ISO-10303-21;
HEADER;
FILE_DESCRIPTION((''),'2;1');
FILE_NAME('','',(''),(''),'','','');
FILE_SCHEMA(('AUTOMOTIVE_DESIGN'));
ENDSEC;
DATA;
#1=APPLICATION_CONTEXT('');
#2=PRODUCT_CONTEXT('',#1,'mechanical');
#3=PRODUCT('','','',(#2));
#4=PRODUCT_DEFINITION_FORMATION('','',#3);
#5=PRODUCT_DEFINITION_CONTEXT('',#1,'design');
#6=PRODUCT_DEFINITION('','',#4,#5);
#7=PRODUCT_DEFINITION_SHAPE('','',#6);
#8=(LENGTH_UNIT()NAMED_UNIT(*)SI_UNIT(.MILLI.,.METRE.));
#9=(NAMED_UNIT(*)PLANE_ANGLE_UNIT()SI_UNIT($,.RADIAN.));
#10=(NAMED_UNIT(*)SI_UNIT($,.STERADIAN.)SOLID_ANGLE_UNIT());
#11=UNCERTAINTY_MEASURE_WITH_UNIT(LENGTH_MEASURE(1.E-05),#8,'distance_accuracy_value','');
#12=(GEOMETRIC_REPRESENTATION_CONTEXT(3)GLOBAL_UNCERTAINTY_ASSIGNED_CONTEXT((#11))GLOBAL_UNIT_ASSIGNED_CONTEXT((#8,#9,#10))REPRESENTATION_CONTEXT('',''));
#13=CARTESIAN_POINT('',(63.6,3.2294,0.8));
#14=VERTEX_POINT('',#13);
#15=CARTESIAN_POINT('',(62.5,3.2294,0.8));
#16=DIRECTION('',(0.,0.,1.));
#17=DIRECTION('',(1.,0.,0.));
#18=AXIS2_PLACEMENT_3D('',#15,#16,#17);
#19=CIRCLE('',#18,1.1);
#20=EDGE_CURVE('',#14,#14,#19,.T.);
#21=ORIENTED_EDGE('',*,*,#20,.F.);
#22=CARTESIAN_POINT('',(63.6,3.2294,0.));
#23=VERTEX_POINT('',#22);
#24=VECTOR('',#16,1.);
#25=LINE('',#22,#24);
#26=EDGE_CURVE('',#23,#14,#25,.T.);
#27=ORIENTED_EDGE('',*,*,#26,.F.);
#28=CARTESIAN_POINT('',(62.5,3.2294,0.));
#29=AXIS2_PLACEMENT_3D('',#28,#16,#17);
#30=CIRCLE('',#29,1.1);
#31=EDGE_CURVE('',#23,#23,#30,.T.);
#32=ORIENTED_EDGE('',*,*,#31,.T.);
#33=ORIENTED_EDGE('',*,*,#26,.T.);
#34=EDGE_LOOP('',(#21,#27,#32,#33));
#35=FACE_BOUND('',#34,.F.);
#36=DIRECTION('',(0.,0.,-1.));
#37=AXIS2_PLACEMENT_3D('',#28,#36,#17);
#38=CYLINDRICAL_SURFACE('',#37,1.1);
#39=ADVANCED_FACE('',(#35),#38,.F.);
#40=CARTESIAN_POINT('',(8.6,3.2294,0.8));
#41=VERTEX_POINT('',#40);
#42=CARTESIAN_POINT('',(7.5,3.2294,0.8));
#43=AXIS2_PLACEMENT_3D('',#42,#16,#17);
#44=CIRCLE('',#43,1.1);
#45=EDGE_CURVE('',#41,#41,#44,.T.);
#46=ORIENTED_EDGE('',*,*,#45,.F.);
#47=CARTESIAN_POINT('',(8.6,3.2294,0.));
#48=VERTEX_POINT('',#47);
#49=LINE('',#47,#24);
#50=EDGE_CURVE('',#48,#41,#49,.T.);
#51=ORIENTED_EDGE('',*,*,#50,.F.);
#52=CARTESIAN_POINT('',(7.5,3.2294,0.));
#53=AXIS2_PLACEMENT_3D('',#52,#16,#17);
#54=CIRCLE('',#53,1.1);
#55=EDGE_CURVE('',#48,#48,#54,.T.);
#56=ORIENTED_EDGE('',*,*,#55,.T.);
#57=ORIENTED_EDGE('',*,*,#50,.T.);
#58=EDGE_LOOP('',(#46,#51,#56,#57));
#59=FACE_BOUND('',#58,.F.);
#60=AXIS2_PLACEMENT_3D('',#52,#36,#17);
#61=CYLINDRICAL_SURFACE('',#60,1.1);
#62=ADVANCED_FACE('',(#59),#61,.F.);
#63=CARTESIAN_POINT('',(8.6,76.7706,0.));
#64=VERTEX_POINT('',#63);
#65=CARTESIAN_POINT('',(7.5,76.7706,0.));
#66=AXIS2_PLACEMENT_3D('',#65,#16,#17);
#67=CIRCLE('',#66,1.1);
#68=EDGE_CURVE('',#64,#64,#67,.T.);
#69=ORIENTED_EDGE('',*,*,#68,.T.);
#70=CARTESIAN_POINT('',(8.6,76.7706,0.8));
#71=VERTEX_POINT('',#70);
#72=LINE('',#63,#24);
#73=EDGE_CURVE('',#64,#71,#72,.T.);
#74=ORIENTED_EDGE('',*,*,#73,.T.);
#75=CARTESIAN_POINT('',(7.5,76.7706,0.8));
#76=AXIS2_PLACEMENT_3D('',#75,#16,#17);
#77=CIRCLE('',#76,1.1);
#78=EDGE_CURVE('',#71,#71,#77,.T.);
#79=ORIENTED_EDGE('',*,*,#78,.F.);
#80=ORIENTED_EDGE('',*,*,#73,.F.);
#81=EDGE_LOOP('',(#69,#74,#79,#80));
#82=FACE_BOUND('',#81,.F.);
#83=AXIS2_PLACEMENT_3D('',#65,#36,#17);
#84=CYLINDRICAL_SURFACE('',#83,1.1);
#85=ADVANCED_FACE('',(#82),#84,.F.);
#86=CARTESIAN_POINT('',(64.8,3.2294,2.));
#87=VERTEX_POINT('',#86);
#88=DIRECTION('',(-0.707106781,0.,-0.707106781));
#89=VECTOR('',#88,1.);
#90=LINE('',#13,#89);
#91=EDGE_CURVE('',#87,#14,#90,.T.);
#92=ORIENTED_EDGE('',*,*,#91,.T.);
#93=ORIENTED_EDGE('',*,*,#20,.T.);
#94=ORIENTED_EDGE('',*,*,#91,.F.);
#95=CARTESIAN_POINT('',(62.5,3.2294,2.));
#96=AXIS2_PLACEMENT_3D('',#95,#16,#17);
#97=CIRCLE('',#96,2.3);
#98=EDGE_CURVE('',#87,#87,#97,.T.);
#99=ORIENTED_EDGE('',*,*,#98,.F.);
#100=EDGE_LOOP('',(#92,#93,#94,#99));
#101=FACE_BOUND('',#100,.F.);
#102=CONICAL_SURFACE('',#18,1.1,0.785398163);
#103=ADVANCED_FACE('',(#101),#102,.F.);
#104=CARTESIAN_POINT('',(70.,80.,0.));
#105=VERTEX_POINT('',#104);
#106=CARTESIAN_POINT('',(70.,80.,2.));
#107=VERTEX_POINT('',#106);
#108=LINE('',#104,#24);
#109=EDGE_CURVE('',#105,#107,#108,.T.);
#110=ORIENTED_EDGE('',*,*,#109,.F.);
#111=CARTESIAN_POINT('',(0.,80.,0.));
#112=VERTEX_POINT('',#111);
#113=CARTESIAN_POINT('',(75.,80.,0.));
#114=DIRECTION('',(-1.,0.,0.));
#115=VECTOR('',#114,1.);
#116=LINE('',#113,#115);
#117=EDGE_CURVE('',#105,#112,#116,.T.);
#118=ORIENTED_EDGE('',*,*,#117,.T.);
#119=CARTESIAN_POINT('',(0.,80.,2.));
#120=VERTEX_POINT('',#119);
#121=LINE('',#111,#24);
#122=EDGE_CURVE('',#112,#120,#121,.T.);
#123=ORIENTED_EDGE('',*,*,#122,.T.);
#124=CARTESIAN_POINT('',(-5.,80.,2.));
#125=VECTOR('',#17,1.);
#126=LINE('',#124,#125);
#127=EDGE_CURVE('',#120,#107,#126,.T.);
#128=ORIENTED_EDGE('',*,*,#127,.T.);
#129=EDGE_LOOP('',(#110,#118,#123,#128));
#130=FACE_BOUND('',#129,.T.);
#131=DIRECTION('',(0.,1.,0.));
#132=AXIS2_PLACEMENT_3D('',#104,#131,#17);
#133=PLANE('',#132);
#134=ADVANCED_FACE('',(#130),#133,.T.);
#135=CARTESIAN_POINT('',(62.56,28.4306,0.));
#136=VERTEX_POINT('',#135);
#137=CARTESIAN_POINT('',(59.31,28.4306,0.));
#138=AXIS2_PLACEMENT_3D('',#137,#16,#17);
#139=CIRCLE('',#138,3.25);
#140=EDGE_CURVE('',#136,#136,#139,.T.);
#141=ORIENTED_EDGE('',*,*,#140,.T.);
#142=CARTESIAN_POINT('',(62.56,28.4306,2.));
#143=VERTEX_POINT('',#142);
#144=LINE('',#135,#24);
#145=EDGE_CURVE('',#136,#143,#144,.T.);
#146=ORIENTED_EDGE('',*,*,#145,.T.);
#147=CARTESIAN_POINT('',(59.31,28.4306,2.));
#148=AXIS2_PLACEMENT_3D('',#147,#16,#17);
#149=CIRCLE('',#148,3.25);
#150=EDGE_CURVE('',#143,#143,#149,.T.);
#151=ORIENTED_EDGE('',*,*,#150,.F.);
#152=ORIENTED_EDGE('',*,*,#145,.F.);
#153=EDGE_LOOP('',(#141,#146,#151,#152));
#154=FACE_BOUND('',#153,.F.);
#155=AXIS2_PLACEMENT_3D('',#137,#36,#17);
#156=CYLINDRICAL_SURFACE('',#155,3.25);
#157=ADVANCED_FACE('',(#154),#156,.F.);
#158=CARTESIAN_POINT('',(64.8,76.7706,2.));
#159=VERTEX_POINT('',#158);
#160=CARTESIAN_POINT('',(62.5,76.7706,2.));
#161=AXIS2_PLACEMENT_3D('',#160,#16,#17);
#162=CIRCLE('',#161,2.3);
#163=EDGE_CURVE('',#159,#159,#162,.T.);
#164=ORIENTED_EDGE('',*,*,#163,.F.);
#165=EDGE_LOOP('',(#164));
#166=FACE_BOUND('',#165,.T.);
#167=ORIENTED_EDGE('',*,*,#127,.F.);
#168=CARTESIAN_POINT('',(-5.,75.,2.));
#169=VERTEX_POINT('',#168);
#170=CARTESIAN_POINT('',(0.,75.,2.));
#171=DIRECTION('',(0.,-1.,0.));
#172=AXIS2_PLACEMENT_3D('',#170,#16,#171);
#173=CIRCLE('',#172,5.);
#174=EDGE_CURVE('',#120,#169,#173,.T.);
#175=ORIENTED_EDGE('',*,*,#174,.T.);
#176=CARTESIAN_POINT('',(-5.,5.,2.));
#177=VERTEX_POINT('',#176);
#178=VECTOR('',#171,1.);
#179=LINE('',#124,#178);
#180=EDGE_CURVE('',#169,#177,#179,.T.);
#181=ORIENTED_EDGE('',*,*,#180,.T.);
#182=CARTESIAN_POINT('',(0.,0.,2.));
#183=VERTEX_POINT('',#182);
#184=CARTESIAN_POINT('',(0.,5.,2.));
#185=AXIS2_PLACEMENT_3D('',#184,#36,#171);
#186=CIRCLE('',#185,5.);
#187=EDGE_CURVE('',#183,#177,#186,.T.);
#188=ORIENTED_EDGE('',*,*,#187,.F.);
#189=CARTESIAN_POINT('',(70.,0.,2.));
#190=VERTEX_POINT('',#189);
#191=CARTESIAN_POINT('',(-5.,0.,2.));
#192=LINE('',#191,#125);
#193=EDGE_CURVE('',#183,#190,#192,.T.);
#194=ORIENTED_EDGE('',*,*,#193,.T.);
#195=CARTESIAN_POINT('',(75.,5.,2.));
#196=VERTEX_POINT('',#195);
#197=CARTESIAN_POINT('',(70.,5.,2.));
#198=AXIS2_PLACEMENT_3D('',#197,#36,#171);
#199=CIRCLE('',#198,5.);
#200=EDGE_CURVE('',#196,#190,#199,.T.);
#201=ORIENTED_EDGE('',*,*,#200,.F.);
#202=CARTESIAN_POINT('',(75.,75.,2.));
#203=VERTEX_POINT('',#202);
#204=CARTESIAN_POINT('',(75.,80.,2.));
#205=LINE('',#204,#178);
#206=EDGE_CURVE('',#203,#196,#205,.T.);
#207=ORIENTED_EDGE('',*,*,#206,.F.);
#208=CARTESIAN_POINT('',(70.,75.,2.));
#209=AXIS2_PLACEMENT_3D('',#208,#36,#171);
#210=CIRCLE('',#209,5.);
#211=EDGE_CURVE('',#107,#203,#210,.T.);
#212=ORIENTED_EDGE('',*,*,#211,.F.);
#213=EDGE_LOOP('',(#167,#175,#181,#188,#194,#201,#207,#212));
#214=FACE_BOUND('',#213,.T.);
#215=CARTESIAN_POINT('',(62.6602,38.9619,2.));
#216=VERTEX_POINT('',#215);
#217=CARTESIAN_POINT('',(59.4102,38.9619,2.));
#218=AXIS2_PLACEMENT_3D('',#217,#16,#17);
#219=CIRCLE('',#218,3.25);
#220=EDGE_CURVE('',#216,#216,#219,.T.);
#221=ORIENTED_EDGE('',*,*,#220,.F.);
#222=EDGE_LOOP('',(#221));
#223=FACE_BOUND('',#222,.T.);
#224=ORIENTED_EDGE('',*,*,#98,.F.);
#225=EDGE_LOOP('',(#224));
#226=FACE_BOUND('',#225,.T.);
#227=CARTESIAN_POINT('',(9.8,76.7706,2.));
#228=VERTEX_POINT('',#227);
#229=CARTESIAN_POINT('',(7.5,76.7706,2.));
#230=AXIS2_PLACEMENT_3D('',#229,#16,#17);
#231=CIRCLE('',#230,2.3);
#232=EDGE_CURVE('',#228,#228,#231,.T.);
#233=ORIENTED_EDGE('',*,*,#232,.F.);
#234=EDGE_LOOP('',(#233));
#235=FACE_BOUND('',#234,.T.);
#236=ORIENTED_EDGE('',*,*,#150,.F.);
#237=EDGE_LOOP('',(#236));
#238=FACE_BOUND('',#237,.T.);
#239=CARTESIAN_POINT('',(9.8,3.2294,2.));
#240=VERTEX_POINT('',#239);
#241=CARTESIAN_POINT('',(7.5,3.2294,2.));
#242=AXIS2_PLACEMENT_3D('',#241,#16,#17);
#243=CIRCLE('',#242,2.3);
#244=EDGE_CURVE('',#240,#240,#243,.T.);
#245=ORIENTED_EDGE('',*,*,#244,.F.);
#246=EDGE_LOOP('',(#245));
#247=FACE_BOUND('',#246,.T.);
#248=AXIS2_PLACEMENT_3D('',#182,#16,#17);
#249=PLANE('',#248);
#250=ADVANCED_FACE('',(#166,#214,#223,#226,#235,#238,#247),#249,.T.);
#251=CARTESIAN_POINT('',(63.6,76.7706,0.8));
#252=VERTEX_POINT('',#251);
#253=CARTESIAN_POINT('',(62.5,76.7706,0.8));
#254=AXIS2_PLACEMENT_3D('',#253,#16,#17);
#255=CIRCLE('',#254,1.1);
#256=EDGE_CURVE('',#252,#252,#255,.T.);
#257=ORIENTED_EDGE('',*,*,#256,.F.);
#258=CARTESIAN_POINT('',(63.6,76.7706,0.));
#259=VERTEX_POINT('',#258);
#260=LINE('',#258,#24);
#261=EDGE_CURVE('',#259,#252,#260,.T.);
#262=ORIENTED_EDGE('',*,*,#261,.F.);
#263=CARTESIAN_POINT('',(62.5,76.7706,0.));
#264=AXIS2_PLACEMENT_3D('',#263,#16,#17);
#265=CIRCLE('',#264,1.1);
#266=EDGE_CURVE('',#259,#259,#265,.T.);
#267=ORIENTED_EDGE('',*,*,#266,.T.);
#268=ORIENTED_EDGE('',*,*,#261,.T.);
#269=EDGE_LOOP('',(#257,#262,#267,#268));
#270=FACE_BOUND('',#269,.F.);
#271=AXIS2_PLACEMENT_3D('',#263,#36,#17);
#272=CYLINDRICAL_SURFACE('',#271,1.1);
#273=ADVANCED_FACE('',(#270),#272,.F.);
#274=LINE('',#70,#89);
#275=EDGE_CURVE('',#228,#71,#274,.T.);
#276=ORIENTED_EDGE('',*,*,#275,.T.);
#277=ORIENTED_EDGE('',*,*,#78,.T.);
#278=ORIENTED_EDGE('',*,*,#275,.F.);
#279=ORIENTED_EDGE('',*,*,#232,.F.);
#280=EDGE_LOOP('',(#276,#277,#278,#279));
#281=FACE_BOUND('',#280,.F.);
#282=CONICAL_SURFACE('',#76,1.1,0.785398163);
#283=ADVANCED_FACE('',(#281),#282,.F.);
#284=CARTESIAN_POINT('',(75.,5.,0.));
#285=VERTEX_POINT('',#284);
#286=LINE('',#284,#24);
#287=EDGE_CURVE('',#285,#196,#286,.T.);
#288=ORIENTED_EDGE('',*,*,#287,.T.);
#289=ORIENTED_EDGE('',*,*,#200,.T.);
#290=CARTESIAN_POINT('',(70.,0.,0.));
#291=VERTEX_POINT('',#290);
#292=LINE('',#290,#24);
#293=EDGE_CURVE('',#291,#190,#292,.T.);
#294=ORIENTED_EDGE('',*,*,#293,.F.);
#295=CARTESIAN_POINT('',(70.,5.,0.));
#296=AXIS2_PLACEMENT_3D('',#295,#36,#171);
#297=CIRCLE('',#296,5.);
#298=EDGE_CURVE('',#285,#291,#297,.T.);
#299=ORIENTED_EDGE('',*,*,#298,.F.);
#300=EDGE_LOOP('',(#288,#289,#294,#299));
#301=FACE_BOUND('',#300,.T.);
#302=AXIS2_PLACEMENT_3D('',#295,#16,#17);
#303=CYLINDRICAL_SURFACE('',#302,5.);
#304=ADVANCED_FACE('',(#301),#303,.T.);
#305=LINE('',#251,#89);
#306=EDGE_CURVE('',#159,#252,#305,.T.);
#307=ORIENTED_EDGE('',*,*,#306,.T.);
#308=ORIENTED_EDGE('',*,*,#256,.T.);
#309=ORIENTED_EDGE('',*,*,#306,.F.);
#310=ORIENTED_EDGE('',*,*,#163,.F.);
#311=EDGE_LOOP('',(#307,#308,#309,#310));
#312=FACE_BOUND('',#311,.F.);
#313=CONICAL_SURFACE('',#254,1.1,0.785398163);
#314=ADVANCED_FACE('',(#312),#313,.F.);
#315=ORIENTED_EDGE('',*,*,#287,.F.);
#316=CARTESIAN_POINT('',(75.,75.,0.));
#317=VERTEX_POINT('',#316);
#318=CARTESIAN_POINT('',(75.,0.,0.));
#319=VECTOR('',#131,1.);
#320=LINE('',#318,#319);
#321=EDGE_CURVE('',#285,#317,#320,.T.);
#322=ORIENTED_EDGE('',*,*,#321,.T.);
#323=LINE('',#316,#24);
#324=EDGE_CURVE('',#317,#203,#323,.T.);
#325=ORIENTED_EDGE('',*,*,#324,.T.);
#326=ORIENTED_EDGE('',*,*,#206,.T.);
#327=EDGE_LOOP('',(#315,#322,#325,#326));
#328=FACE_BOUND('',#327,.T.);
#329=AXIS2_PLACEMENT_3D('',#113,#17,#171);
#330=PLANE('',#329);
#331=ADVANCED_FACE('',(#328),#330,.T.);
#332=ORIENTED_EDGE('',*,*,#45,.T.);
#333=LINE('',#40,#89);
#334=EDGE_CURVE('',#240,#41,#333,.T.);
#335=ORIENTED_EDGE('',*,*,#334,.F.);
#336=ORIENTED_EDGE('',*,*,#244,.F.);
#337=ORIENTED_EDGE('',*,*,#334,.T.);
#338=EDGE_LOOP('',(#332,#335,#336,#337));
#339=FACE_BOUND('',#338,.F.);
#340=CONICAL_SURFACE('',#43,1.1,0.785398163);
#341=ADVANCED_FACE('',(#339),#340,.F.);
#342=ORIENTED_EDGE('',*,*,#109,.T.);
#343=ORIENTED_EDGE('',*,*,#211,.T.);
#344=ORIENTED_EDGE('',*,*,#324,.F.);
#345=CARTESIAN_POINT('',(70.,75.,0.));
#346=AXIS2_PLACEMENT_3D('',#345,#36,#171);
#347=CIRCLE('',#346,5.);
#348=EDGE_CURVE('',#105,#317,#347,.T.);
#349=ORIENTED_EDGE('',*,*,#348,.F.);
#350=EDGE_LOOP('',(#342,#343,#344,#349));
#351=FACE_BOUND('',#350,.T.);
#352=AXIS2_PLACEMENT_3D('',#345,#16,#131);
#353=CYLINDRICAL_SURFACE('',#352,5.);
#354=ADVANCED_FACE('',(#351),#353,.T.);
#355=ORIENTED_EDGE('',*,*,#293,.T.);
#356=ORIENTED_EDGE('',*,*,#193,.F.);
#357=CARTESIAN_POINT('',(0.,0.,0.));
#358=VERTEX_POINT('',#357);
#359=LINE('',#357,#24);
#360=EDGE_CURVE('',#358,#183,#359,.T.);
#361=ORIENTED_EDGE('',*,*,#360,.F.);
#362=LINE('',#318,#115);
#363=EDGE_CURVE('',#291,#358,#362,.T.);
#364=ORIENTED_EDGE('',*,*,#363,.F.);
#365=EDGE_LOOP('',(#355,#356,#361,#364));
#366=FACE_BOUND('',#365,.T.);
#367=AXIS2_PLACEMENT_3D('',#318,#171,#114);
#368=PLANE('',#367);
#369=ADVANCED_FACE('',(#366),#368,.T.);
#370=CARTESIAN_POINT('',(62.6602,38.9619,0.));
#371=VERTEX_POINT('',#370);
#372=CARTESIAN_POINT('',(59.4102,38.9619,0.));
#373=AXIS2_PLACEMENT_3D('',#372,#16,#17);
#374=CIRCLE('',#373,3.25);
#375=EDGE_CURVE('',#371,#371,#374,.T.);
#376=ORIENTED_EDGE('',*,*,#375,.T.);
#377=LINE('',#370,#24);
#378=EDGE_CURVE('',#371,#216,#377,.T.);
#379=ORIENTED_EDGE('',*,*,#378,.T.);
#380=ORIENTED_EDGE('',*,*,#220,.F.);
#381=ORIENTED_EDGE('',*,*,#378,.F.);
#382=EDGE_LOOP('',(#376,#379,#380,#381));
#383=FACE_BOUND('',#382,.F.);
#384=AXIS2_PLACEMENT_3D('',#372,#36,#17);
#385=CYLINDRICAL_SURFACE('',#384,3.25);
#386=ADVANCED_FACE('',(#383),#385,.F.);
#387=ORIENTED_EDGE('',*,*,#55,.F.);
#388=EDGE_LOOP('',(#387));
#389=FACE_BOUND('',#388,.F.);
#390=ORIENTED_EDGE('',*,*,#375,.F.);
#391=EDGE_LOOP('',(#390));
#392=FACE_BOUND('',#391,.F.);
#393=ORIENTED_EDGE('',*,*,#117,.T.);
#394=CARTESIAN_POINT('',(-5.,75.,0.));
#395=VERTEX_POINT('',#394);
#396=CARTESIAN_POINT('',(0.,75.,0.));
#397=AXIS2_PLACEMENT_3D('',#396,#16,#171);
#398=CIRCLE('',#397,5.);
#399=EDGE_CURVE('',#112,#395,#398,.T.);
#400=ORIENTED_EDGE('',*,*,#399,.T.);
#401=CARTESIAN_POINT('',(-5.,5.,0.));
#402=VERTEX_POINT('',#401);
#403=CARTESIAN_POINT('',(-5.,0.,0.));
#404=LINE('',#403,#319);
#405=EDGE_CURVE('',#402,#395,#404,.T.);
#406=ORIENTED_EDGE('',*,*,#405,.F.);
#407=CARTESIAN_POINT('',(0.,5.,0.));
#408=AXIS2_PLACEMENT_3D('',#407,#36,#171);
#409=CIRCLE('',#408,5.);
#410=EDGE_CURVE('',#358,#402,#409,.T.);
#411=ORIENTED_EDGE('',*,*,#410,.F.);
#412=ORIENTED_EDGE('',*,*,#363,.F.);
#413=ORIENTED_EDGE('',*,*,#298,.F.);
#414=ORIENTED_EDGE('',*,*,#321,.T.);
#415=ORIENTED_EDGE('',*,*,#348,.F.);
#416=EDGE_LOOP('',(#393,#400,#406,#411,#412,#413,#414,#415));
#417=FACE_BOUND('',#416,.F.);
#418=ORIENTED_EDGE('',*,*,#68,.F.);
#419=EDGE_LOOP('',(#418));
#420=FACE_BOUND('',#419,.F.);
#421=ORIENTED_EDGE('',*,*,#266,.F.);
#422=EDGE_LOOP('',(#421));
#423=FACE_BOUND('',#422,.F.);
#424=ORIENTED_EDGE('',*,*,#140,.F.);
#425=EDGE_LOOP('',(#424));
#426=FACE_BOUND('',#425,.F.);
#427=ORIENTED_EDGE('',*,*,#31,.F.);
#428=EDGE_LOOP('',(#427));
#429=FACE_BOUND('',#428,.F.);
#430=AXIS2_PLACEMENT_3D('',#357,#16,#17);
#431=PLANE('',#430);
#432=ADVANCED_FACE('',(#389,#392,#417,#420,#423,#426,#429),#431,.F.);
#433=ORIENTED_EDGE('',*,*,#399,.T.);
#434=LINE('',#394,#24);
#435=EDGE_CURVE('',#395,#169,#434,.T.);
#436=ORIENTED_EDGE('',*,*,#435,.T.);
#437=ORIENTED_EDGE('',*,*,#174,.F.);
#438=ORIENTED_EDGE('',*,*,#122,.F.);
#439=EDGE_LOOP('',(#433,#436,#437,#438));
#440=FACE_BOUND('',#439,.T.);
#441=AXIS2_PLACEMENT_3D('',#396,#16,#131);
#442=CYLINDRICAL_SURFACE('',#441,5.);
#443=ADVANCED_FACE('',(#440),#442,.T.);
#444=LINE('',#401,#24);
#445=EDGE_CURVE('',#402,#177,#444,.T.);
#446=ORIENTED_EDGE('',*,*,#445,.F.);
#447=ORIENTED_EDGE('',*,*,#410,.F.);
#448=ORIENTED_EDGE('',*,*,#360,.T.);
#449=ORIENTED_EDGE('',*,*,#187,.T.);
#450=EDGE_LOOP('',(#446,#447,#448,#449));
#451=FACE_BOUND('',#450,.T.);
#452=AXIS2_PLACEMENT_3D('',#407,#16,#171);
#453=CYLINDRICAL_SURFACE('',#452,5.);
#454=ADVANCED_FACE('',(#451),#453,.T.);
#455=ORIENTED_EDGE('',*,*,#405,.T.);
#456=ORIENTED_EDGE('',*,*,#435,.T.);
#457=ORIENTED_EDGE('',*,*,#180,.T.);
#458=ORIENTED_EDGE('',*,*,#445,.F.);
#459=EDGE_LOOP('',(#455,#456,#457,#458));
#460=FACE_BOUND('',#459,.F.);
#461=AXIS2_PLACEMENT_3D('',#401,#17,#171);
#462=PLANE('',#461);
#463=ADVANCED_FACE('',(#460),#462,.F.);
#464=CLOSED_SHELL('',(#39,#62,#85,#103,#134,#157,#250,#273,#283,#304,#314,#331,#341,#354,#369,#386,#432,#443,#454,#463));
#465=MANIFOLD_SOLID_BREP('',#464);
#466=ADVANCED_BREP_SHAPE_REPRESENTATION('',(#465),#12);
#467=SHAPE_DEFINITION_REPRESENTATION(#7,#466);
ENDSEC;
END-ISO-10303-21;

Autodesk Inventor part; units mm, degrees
ref_plane "YZ Plane" through (0, 0, 0) normal (1, 0, 0) x (0, 1, 0)
ref_plane "XZ Plane" through (0, 0, 0) normal (0, 1, 0) x (-1, 0, 0)
ref_plane "XY Plane" through (0, 0, 0) normal (0, 0, 1) x (1, 0, 0)
sketch "Эскиз2" plane through (0, 0, 0) normal (0, 0, 1) x (1, 0, 0)
  line L0 (70, 80) -> (0, 80)
  line L1 (-5, 75) -> (-5, 5)
  line L2 (75, 5) -> (75, 75)
  line L3 (0, 0) -> (70, 0)
  line L4 (70, 73.5411) -> (70, 6.4589)
  line L5 (0, 73.5411) -> (70, 73.5411)
  line L6 (0, 6.4589) -> (0, 73.5411)
  line L7 (70, 6.4589) -> (0, 6.4589)
  arc A0 (8.6686, 75.4679) -> (8.8027, 75.602) centre (7.5, 76.7706) ccw
  circle A1 centre (7.5, 76.7706) radius 1.1
  circle A2 centre (62.5, 76.7706) radius 1.1
  circle A3 centre (62.5, 3.2294) radius 1.1
  circle A4 centre (7.5, 3.2294) radius 1.1
  line L8 (-5, 75) -> (-5, 80)
  line L9 (-5, 80) -> (0, 80)
  line L10 (70, 80) -> (75, 80)
  line L11 (75, 80) -> (75, 75)
  line L12 (75, 5) -> (75, 0)
  line L13 (75, 0) -> (70, 0)
  line L14 (0, 0) -> (-5, 0)
  line L15 (-5, 5) -> (-5, 0)
  circle A5 centre (59.4102, 38.9619) radius 3.25
  circle A6 centre (59.31, 28.4306) radius 3.25
  dimension "d8" = 2.2
  dimension "d9" = 2.2
  dimension "d10" = 2.2
  dimension "d11" = 2.2
  dimension "d12" = 6.5
  dimension "d13" = 6.5
extrude "Выдавливание2" add sketch "Эскиз2" along normal blind 2 contours L10 L11 L2 L12 L13 L3 L14 L15 L1 L8 L9 L0 | L4 L7 L6 L5
fillet "Сопряжение2" radius 5 4 edges at (-5, 0, 1) (75, 0, 1) (75, 80, 1) (-5, 80, 1)
chamfer "Фаска1" distance 1.2 angle 45 4 edges at (6.4, 76.7706, 2) (61.4, 76.7706, 2) (61.4, 3.2294, 2) (6.4, 3.2294, 2)
properties part number "Case_Cover"
